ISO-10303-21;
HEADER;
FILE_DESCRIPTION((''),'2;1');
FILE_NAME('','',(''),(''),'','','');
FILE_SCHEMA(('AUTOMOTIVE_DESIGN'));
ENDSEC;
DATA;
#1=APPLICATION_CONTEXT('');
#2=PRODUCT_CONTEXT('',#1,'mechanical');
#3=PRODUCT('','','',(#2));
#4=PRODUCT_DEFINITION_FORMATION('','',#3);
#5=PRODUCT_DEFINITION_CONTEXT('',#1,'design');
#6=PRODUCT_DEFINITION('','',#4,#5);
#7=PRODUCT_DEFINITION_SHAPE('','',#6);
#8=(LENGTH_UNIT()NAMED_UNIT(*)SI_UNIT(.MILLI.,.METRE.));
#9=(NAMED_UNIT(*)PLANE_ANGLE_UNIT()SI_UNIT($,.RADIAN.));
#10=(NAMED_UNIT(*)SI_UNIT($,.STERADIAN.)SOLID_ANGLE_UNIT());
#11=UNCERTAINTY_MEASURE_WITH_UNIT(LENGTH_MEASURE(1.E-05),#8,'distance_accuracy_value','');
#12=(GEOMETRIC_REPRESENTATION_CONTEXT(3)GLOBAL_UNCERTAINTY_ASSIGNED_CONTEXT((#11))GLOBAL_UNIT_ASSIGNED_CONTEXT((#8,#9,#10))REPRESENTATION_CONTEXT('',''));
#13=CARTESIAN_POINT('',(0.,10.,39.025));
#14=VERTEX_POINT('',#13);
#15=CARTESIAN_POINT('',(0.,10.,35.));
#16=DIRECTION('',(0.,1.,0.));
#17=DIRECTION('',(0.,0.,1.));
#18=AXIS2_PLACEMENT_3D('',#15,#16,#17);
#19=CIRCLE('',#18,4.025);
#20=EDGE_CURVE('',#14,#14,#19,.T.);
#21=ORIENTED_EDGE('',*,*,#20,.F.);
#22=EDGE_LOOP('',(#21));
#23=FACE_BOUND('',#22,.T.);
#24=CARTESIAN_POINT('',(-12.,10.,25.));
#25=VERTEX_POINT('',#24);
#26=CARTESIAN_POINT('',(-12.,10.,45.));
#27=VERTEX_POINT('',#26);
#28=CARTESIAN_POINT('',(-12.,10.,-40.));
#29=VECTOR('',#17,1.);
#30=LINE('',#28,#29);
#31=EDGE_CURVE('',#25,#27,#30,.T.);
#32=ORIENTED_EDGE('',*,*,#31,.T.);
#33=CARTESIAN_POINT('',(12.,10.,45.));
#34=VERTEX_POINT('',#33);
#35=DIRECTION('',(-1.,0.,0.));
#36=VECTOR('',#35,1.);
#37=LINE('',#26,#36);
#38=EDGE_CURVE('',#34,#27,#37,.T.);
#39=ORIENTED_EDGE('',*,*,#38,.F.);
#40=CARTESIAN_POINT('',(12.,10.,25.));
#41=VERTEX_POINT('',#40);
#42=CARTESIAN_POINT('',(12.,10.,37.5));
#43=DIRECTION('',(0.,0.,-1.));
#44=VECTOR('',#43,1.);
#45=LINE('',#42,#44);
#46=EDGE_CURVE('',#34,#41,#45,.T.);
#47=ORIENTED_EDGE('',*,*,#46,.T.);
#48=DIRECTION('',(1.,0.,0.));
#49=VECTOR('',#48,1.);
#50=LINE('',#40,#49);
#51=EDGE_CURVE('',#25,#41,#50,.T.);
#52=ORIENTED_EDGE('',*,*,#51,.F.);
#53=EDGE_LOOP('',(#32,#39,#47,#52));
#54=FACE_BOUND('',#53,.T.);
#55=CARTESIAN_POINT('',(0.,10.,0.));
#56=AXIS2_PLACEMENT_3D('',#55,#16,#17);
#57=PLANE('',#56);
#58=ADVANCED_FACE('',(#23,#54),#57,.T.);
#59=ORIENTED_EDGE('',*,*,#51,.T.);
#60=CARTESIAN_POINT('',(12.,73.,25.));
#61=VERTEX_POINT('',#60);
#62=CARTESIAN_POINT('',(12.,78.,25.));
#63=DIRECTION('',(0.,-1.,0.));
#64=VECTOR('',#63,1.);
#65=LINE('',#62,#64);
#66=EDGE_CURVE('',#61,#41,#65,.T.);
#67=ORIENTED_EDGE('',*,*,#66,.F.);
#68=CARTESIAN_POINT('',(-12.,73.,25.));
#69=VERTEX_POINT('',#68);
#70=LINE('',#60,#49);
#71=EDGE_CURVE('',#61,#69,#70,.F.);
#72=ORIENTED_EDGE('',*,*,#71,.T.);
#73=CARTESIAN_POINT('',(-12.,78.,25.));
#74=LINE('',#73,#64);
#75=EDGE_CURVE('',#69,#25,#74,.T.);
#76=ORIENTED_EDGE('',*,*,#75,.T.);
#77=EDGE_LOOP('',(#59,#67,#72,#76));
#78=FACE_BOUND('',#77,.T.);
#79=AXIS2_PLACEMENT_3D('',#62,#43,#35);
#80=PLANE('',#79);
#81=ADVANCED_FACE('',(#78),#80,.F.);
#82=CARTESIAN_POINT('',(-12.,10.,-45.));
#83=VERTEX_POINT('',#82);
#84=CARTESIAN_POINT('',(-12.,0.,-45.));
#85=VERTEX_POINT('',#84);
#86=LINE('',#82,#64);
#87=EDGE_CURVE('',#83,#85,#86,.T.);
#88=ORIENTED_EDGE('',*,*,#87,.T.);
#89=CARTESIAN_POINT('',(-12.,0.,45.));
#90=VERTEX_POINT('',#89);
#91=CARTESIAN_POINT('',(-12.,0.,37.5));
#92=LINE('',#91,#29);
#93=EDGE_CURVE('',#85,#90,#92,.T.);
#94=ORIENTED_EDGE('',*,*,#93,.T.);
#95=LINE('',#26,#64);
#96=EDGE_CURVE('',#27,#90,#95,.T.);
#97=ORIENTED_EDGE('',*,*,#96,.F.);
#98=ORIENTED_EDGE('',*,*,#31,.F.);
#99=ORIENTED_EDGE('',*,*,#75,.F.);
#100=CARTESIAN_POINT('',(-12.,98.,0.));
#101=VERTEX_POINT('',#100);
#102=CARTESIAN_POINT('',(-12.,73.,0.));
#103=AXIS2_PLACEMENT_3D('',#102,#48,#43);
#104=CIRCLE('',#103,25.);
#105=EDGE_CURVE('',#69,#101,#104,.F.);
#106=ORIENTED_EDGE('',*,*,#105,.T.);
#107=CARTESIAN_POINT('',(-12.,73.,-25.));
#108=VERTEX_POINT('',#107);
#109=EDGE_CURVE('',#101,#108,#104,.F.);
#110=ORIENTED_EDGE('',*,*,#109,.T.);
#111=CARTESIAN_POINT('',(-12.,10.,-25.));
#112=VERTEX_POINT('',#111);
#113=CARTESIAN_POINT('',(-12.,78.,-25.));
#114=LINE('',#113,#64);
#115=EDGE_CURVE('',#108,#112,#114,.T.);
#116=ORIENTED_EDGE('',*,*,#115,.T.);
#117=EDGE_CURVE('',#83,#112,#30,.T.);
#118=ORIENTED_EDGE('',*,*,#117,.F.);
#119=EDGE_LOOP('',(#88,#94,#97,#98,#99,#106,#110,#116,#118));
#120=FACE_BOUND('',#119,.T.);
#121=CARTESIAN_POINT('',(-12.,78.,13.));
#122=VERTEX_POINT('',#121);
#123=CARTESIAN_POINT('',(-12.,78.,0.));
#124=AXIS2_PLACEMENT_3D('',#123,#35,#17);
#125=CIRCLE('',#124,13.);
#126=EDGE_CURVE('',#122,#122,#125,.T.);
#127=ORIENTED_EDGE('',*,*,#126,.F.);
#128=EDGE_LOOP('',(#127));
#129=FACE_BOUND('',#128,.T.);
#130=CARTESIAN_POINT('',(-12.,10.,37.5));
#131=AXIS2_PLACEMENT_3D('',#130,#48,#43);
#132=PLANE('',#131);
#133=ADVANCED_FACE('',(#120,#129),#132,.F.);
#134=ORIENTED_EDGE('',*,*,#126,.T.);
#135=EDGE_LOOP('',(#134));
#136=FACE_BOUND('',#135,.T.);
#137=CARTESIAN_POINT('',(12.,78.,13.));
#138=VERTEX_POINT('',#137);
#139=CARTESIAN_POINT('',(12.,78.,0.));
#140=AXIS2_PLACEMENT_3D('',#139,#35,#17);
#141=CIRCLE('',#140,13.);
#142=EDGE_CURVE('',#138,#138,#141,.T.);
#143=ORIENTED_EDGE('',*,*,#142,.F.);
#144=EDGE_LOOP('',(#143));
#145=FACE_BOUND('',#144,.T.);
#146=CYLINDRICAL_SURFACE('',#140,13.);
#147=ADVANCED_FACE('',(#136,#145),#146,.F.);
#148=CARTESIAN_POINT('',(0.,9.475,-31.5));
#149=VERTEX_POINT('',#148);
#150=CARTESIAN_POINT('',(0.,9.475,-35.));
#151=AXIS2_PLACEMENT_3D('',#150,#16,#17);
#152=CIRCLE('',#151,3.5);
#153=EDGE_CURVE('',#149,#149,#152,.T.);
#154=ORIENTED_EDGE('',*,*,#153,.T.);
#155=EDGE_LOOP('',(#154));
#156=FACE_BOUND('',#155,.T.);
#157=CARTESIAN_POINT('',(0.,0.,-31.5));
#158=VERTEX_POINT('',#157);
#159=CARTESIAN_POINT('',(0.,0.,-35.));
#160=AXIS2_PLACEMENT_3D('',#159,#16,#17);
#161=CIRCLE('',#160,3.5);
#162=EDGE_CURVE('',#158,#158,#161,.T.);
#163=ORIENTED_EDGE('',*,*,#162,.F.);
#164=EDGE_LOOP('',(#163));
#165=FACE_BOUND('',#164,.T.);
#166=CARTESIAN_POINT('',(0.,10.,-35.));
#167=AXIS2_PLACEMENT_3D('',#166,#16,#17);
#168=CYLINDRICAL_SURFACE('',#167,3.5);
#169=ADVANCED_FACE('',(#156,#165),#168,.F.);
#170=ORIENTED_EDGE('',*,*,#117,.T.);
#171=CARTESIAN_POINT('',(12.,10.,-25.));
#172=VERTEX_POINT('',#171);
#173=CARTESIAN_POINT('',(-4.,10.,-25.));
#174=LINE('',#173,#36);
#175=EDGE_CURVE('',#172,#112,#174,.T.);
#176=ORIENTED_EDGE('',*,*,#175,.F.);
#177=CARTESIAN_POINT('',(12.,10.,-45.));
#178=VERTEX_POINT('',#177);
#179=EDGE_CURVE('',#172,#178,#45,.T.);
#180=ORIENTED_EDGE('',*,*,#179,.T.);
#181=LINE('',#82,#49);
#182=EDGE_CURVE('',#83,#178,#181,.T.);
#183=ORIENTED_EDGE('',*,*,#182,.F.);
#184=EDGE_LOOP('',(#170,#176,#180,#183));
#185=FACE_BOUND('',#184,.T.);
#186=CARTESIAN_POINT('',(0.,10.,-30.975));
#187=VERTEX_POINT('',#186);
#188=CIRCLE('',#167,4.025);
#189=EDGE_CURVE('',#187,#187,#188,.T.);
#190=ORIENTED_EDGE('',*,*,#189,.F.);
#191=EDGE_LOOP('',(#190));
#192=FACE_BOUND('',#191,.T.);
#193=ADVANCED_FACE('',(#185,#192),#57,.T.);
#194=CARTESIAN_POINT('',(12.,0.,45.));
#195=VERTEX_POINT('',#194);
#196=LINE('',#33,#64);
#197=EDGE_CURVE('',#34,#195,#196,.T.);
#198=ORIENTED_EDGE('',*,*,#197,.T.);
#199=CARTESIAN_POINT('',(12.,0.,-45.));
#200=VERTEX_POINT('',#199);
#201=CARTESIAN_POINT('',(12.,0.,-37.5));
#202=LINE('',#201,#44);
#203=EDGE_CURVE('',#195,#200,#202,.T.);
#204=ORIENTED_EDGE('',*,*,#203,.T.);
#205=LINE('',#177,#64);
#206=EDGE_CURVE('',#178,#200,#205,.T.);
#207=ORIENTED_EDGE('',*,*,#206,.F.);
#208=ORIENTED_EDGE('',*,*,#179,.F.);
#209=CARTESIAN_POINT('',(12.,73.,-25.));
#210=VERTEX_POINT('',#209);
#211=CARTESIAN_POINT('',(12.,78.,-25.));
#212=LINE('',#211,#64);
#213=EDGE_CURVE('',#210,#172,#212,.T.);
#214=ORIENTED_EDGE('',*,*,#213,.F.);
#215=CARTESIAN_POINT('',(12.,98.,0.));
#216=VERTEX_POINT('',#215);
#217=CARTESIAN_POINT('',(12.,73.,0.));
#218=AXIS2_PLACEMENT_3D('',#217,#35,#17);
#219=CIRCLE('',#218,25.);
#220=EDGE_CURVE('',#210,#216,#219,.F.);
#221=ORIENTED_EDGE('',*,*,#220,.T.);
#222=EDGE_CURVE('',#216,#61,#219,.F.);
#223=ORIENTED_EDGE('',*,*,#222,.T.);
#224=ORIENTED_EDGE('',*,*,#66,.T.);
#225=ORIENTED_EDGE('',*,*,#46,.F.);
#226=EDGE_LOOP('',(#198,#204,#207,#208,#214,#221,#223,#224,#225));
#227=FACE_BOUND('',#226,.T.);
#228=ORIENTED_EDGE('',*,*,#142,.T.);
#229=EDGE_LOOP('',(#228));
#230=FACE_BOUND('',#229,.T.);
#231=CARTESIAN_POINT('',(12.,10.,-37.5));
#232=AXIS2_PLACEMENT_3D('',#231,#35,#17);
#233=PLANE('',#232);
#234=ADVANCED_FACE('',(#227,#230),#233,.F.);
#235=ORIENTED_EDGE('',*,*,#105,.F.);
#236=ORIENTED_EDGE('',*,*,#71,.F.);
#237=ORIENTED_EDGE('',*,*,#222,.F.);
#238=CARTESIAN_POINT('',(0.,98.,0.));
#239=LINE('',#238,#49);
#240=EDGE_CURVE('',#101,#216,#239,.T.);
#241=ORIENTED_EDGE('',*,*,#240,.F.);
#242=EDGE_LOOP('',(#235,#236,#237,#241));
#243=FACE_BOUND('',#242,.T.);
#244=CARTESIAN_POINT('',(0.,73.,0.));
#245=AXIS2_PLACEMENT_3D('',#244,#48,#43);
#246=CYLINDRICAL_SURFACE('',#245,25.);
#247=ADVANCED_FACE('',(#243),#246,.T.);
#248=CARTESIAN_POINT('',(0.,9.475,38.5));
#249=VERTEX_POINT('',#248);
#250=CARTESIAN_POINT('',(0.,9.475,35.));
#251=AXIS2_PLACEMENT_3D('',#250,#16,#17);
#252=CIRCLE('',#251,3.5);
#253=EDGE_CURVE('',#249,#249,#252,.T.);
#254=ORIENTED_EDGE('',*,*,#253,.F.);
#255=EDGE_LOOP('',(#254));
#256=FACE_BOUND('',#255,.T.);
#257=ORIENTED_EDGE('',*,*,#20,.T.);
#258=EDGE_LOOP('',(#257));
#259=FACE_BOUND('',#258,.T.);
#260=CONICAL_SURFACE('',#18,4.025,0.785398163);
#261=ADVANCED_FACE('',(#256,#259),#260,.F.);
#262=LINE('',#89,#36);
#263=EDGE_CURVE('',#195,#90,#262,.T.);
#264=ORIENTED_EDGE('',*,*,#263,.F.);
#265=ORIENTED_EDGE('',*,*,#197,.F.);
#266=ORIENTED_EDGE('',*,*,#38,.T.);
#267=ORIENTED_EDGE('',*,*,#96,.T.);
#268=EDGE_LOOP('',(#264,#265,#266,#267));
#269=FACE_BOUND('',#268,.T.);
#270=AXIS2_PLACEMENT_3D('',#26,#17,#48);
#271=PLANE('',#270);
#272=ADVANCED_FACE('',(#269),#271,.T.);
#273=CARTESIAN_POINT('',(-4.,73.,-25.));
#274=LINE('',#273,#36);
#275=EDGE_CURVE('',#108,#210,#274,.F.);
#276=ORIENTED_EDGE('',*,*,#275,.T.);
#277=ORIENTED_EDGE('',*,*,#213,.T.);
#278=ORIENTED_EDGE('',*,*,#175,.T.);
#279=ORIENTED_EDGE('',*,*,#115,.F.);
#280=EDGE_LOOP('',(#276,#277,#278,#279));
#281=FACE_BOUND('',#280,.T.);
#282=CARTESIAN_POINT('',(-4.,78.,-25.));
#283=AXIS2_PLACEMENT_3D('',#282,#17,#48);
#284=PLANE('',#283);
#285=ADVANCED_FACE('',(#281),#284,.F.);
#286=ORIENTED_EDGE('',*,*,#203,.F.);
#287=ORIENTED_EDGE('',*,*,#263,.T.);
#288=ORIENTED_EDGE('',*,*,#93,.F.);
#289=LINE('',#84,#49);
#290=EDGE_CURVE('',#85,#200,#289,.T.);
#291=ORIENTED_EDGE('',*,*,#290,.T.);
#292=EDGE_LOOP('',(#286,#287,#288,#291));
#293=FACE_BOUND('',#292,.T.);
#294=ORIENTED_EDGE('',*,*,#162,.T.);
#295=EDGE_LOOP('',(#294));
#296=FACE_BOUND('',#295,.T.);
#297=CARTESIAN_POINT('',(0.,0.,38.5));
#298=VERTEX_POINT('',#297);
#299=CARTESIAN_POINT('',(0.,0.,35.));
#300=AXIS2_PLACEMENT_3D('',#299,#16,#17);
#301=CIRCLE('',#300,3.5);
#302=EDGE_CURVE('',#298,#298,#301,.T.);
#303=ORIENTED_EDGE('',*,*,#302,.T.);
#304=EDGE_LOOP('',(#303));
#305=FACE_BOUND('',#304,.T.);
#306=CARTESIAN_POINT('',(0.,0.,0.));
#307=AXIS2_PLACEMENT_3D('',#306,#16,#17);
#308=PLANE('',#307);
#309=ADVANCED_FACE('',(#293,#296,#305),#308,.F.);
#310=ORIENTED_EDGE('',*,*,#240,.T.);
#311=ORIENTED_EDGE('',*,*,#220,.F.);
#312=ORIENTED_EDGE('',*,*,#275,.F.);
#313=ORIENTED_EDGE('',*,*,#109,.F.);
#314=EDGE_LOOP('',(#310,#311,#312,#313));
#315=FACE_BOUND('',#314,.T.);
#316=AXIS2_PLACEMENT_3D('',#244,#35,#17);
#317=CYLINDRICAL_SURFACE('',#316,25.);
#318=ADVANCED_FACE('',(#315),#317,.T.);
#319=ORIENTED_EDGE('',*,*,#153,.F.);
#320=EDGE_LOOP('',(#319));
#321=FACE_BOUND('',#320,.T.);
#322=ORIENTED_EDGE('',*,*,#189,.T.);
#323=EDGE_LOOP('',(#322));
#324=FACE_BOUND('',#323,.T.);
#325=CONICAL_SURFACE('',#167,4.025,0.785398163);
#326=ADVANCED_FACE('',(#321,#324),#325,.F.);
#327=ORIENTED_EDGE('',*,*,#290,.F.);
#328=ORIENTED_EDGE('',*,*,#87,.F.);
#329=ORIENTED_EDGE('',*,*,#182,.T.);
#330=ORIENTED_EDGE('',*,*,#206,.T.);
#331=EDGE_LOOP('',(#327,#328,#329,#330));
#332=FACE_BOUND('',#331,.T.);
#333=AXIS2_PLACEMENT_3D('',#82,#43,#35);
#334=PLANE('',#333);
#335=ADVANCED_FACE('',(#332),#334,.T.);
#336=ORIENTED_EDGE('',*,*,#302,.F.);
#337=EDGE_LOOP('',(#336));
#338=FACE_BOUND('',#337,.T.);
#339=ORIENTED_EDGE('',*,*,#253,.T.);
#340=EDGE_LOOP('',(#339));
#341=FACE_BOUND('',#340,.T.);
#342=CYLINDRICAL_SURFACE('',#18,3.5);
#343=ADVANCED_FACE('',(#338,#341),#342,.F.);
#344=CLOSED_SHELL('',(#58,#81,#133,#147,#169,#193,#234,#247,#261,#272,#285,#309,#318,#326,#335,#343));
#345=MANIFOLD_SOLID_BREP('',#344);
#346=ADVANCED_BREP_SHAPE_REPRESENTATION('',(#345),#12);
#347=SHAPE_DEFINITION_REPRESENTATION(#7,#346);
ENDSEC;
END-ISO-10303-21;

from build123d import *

# Parameters (mm, degrees)
EXTRUDE_1_DEPTH      = 10
EXTRUDE_2_DEPTH      = 68
SKETCH_9_W           = 24
SKETCH_9_H           = 50
EXTRUDE_4_DEPTH      = 20
SKETCH_10_R          = 13
CUT_EXTRUDE_3_DEPTH  = 109.53570841
FILLET_6_R           = 25
SKETCH_22_W          = 24
SKETCH_22_H          = 5
EXTRUDE_5_DEPTH      = 10
M8X1_0_1_D           = 7
M8X1_0_1_CSINK_D     = 8.05
M8X1_0_1_CSINK_ANGLE = 90


with BuildPart() as part:
    # 草图1 → 凸台-拉伸1 (new body)
    with BuildSketch(Plane(origin=(0, 0, 0), x_dir=(1, 0, 0), z_dir=(0, 1, 0))):
        Polygon((12, 37.5), (12, 40), (-12, 40), (-12, 37.5), (-12, -37.5), (-12, -40), (12, -40), (12, -37.5), align=None)
    extrude(amount=EXTRUDE_1_DEPTH)

    # 草图2 → 凸台-拉伸2 (add)
    with BuildSketch(Plane(origin=(0, 10, 0), x_dir=(1, 0, 0), z_dir=(0, 1, 0))):
        Polygon((-4, 25), (-12, 25), (-12, -25), (-4, -25), (4, -25), (12, -25), (12, 25), (4, 25), align=None)
    extrude(amount=EXTRUDE_2_DEPTH)

    # 草图9 → 凸台-拉伸4 (add)
    with BuildSketch(Plane(origin=(0, 78, 0), x_dir=(1, 0, 0), z_dir=(0, 1, 0))):
        Rectangle(SKETCH_9_W, SKETCH_9_H)
    extrude(amount=EXTRUDE_4_DEPTH)

    # 草图10 → 切除-拉伸3 (cut, through all)
    with BuildSketch(Plane.ZY.offset(12)):
        with Locations((0, 78)):
            Circle(SKETCH_10_R)
    extrude(amount=-CUT_EXTRUDE_3_DEPTH, mode=Mode.SUBTRACT)

    # 圆角6
    fillet_6_edges = [part.edges().sort_by_distance(p)[0] for p in [
        (0, 98, -25),
        (0, 98, 25),
    ]]
    fillet(fillet_6_edges, radius=FILLET_6_R - 0.0001)  # a hair under: the kernel refuses the full size

    # 草图22 → 凸台-拉伸5 (add)
    with BuildSketch(Plane.XZ):
        with Locations((0, 42.5)):
            Rectangle(SKETCH_22_W, SKETCH_22_H)
        with Locations((0, -42.5)):
            Rectangle(SKETCH_22_W, SKETCH_22_H)
    extrude(amount=-EXTRUDE_5_DEPTH)

    # M8x1.0 螺纹孔1 (through all)
    with Locations(Plane(origin=(0, 10, 0), x_dir=(1, 0, 0), z_dir=(0, 1, 0))):
        with Locations((0, -35), (0, 35)):
            CounterSinkHole(M8X1_0_1_D / 2, M8X1_0_1_CSINK_D / 2, counter_sink_angle=M8X1_0_1_CSINK_ANGLE)


solid = part.part
